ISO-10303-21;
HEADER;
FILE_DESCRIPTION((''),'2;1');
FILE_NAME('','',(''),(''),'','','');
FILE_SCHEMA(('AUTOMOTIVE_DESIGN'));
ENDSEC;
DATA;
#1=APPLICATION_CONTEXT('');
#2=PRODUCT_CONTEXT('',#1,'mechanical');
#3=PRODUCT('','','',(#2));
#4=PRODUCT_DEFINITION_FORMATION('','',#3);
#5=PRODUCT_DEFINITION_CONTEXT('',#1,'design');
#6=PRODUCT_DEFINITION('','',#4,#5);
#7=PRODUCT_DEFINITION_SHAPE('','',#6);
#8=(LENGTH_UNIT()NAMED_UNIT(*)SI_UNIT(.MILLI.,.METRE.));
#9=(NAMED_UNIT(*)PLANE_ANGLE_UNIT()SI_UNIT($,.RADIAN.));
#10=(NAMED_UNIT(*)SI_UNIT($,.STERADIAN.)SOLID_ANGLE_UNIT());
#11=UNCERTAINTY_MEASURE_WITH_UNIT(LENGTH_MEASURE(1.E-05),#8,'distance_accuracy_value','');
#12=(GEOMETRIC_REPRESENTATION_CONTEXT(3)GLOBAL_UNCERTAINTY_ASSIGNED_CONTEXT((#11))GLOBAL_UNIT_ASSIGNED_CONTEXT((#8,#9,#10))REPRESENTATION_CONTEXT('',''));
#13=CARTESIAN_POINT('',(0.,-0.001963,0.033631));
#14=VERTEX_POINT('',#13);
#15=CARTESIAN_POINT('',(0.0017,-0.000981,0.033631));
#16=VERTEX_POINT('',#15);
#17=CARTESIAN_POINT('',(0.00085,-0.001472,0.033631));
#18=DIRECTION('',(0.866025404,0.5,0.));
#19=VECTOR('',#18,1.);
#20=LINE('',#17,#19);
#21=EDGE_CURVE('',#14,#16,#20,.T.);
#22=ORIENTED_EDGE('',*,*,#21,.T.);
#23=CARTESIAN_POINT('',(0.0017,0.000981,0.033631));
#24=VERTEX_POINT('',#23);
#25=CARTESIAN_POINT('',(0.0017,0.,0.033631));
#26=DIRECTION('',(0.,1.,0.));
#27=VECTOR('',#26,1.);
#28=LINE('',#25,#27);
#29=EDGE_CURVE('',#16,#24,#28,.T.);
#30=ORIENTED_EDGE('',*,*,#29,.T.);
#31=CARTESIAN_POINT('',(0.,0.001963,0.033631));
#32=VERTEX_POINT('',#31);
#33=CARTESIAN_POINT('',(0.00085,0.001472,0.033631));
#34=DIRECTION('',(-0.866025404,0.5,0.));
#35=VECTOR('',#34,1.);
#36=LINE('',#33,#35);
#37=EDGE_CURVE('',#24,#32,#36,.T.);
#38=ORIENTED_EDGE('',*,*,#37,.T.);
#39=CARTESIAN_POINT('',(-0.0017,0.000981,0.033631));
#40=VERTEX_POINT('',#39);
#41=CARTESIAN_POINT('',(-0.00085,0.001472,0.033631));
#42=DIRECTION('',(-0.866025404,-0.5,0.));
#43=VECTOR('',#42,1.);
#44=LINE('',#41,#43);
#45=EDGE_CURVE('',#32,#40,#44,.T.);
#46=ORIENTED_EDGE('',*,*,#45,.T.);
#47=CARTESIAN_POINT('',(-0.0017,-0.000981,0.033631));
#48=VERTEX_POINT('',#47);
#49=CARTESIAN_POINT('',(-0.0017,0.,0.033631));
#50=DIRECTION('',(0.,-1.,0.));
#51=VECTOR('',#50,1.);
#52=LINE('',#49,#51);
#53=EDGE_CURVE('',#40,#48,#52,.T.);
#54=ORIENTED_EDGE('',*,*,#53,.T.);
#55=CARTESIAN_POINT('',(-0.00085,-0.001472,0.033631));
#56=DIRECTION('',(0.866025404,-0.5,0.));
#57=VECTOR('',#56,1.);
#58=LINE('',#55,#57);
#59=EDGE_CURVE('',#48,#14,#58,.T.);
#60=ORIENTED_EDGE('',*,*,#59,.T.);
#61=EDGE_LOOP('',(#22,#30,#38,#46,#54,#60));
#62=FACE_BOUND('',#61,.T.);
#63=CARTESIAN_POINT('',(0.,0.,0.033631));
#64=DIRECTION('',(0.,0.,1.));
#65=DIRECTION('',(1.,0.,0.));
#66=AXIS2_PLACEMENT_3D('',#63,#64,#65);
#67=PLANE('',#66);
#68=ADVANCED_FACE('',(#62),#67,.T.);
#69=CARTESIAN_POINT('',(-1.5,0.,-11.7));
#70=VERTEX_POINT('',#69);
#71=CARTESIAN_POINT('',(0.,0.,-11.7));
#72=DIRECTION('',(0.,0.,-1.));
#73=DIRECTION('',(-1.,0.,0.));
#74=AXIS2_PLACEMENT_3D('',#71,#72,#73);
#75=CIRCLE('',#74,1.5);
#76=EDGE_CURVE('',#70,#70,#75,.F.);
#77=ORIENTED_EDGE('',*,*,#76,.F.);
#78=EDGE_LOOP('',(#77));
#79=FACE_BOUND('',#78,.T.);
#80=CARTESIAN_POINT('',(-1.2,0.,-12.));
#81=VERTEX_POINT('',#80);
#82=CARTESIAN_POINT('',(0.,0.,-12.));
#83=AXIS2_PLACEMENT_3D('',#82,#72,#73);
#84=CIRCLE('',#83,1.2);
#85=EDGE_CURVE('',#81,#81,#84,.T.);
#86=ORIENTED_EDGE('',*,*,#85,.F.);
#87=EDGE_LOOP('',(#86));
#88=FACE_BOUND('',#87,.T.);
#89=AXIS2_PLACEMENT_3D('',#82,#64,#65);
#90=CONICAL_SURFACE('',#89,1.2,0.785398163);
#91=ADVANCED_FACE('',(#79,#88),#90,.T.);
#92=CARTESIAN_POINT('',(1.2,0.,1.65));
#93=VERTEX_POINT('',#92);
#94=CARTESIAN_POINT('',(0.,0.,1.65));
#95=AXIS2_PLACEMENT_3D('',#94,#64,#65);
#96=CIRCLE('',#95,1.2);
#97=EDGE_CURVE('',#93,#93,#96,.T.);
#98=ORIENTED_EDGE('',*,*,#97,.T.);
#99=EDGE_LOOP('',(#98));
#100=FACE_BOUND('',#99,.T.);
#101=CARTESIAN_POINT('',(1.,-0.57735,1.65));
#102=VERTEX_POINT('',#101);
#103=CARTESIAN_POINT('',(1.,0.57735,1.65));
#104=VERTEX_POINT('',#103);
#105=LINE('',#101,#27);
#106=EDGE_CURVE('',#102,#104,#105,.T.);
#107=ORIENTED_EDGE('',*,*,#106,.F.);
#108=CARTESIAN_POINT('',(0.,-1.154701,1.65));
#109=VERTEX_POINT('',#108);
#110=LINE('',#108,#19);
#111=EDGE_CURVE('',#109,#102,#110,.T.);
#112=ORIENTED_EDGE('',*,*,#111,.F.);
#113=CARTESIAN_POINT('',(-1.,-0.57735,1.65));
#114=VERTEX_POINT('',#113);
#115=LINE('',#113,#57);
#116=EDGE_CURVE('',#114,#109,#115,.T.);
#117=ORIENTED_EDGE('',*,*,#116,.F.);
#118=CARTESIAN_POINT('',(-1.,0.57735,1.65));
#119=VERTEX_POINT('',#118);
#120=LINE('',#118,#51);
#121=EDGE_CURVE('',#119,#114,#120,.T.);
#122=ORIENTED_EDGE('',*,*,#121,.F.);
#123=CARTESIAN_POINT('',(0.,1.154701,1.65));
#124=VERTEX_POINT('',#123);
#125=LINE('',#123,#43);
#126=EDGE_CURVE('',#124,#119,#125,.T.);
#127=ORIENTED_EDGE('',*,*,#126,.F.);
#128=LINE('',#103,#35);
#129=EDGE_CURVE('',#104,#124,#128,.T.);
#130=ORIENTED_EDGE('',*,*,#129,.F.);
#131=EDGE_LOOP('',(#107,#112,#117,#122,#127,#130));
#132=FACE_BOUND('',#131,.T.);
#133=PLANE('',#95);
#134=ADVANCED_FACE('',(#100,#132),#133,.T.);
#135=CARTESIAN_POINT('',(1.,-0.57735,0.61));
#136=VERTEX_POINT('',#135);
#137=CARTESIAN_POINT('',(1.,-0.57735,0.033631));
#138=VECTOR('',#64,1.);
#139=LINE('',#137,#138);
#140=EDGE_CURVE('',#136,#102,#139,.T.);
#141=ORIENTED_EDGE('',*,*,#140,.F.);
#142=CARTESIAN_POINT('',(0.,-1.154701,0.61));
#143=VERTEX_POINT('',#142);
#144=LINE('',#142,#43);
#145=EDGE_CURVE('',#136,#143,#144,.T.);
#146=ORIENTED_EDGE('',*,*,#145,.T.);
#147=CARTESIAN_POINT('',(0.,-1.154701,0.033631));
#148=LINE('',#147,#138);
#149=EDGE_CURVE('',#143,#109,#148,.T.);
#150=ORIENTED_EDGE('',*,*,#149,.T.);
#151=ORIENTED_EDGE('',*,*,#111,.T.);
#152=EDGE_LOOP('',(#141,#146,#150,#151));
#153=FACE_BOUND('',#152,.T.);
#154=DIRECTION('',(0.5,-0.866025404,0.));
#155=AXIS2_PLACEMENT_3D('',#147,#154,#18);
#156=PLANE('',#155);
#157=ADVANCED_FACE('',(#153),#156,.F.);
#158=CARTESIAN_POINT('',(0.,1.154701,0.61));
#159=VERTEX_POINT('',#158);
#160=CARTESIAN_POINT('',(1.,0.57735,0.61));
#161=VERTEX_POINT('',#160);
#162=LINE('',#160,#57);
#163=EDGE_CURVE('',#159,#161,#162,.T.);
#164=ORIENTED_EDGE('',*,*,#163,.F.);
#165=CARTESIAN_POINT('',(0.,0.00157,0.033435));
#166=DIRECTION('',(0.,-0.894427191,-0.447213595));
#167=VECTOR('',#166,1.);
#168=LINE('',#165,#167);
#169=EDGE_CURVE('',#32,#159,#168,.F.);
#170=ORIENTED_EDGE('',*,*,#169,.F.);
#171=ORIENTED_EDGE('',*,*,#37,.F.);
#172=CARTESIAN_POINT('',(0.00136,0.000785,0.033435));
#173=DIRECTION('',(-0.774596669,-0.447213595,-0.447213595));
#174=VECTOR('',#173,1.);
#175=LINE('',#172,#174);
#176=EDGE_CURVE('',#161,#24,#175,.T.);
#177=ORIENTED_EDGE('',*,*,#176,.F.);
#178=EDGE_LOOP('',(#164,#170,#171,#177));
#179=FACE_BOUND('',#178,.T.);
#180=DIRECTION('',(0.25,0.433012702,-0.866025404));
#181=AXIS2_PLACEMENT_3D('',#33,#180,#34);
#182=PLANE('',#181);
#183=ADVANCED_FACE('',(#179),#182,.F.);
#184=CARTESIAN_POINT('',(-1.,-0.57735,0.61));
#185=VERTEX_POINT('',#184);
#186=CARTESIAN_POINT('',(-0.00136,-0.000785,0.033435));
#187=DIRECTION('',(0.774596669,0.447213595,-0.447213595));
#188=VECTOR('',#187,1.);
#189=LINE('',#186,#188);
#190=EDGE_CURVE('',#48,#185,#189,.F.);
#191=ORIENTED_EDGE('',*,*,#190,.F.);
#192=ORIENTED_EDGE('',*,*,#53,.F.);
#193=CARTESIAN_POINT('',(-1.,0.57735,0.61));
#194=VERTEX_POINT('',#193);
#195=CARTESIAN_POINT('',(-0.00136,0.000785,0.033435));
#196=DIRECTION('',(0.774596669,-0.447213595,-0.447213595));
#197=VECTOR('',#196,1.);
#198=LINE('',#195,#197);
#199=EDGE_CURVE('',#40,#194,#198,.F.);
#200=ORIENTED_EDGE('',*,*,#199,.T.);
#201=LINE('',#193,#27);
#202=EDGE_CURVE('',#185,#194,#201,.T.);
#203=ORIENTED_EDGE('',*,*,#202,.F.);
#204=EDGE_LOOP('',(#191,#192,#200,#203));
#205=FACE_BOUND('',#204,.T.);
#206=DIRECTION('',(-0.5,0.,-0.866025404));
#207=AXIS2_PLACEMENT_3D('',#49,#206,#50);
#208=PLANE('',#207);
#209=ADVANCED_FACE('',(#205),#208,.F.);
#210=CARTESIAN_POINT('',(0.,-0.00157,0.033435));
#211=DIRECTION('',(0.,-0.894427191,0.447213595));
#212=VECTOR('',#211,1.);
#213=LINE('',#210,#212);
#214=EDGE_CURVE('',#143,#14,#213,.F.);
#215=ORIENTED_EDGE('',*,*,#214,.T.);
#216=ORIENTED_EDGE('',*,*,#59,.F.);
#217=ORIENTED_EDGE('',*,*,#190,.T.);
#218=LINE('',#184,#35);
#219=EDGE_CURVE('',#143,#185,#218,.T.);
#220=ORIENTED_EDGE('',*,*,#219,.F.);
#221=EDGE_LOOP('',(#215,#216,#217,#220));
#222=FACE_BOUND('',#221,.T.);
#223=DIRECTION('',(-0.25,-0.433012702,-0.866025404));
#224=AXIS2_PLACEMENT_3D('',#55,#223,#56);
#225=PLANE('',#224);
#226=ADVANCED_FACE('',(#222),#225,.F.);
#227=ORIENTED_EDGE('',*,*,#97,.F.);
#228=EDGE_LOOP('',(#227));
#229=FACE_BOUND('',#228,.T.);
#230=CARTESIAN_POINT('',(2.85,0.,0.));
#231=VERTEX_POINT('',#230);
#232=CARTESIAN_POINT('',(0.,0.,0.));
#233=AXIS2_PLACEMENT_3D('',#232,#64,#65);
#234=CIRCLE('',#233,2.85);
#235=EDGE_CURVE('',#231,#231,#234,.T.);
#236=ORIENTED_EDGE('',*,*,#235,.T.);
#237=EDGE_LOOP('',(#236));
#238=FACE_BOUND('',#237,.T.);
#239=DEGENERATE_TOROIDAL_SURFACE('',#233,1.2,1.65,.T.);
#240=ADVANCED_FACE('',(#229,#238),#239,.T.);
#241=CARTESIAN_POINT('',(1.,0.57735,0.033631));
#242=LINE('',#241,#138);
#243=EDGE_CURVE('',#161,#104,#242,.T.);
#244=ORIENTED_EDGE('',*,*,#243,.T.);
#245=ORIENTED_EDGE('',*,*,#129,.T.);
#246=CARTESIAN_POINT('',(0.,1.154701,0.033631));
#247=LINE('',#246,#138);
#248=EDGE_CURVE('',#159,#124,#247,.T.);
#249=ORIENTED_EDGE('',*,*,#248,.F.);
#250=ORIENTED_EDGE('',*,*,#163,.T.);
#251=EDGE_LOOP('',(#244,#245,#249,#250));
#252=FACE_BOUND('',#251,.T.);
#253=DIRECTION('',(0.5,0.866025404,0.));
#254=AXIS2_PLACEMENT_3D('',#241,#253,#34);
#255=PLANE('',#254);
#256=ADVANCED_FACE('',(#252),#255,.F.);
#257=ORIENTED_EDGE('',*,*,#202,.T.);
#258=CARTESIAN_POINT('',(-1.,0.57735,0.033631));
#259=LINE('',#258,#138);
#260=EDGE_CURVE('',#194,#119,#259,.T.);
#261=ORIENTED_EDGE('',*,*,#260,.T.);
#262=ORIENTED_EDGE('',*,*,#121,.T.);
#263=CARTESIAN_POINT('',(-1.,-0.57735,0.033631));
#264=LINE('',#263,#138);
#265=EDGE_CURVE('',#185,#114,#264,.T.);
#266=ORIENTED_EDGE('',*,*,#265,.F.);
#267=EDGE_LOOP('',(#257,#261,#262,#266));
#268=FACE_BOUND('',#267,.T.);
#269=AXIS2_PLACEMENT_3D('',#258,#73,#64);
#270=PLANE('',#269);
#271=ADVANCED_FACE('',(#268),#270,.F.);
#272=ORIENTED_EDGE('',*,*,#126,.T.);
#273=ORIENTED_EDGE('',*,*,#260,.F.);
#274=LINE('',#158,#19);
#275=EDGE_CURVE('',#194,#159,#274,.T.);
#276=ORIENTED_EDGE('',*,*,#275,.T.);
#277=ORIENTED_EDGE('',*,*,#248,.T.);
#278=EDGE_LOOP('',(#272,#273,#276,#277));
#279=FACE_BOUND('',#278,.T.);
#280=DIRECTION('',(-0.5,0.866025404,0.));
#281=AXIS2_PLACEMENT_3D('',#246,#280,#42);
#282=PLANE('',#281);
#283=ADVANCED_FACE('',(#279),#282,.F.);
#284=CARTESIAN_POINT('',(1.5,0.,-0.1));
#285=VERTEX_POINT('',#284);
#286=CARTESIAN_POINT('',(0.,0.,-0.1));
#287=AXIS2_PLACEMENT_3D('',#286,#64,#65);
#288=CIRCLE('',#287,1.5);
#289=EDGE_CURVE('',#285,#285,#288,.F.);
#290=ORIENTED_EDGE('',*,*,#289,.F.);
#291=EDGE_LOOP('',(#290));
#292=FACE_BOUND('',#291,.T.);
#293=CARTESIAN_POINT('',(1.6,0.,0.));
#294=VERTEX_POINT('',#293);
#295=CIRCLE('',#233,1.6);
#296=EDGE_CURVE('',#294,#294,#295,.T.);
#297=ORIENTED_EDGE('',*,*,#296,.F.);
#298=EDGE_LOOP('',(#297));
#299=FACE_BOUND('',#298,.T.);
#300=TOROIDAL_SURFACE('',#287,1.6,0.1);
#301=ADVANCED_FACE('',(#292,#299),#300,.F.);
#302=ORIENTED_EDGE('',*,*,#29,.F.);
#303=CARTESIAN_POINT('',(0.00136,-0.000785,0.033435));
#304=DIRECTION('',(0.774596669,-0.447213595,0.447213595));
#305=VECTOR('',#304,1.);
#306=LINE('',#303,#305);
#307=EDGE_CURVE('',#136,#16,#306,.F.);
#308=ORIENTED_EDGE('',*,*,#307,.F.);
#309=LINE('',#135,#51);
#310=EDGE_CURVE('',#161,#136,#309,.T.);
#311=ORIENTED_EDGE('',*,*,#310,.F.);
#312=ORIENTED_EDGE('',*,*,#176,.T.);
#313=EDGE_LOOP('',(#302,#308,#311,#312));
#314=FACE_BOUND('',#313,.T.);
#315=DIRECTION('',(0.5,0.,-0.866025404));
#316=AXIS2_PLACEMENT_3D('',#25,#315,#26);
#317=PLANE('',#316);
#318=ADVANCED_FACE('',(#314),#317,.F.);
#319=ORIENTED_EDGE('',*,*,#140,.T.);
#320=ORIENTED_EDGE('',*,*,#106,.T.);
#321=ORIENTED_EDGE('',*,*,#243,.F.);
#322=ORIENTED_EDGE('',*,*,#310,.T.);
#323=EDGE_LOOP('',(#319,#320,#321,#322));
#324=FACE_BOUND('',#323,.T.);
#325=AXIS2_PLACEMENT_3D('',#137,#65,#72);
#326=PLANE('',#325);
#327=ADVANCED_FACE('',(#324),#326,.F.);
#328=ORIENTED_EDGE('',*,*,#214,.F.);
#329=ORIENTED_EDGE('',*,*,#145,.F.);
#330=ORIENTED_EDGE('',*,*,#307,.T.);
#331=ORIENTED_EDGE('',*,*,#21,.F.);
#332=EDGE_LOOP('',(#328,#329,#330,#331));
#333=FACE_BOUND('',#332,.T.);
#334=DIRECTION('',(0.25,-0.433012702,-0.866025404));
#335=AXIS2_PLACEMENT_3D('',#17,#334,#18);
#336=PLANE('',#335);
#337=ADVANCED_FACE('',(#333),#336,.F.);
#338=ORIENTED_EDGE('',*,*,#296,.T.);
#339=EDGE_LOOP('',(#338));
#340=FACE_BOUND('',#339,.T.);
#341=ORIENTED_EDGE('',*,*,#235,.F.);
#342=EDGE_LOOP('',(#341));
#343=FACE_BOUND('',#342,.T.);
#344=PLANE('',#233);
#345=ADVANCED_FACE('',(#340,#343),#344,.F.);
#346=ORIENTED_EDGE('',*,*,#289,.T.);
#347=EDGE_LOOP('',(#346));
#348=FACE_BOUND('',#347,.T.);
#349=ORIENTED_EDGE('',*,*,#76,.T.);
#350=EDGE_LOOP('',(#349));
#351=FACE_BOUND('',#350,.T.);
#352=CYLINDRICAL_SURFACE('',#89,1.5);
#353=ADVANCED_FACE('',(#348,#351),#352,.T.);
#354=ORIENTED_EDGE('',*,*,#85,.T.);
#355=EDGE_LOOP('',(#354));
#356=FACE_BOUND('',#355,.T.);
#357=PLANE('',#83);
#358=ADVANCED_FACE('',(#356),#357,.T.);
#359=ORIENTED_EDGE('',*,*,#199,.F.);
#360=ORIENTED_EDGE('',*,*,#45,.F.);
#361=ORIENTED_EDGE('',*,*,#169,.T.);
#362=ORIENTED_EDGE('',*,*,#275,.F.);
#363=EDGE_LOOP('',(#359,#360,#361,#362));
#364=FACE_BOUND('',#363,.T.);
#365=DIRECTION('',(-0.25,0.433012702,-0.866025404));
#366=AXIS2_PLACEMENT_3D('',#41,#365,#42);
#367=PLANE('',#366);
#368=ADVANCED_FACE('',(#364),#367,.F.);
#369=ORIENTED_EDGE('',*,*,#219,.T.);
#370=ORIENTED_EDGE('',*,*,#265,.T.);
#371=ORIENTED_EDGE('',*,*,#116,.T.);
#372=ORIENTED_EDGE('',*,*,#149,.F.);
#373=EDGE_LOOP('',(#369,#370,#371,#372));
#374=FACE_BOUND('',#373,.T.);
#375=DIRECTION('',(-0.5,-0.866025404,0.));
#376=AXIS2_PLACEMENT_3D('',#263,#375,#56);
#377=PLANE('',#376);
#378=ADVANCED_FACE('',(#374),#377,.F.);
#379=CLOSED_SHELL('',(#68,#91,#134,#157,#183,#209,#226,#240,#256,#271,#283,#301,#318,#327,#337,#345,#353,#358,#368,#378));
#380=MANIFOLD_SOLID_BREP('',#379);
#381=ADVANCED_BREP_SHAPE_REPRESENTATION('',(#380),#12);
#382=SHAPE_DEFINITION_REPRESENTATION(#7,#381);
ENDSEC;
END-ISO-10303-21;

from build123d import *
from OCP.BRepFilletAPI import BRepFilletAPI_MakeChamfer

# Parameters (mm, degrees)
SKETCH_1_R          = 2.85
EXTRUDE_1_DEPTH     = 1.65
FILLET_1_R          = 1.65
SKETCH_3_R          = 1.5
EXTRUDE_3_DEPTH     = 12
CUT_EXTRUDE_1_DEPTH = 1.616368876
CHAMFER_2_SIZE      = 0.3
CHAMFER_3_SIZE      = 0.576368876
CHAMFER_3_SIZE2     = 0.998300177
FILLET_2_R          = 0.1


with BuildPart() as part:
    # 草图1 → 凸台-拉伸1 (new body)
    with BuildSketch(Plane.XY):
        Circle(SKETCH_1_R)
    extrude(amount=EXTRUDE_1_DEPTH)

    # 圆角1
    fillet_1_edges = [part.edges().sort_by_distance(p)[0] for p in [
        (-2.85, 0, 1.65),
    ]]
    fillet(fillet_1_edges, radius=FILLET_1_R - 0.0001)  # a hair under: the kernel refuses the full size

    # 草图3 → 凸台-拉伸3 (add)
    with BuildSketch(Plane(origin=(0, 0, 0), x_dir=(-1, 0, 0), z_dir=(0, 0, -1))):
        with Locations(Location((0, 0, 0), (0, 0, 180))):
            Circle(SKETCH_3_R)
    extrude(amount=EXTRUDE_3_DEPTH)

    # 草图4 → 切除-拉伸1 (cut)
    with BuildSketch(Plane.XY.offset(1.65)):
        Polygon((1, 0.577350269), (0, 1.154700538), (-1, 0.577350269), (-1, -0.577350269), (0, -1.154700538), (1, -0.577350269), align=None)
    extrude(amount=-CUT_EXTRUDE_1_DEPTH, mode=Mode.SUBTRACT)

    # 倒角2
    chamfer_2_edges = [part.edges().sort_by_distance(p)[0] for p in [
        (-1.5, 0, -12),
    ]]
    chamfer(chamfer_2_edges, length=CHAMFER_2_SIZE)

    # 倒角3: one chamfer whose edges measure the first distance from different faces: ONE call of the kernel's chamfer builder (chamfer() names one face for all edges)
    chamfer_3_edges_1 = [part.edges().sort_by_distance(p)[0] for p in [
        (1, 0, 0.033631124),
    ]]
    chamfer_3_side_1 = [part.faces().sort_by_distance(p)[0] for p in [
        (1, 0, 0.841815562),
    ]]
    chamfer_3_edges_2 = [part.edges().sort_by_distance(p)[0] for p in [
        (0.5, -0.866025404, 0.033631124),
    ]]
    chamfer_3_side_2 = [part.faces().sort_by_distance(p)[0] for p in [
        (0.5, -0.866025404, 0.841815562),
    ]]
    chamfer_3_edges_3 = [part.edges().sort_by_distance(p)[0] for p in [
        (-0.5, -0.866025404, 0.033631124),
    ]]
    chamfer_3_side_3 = [part.faces().sort_by_distance(p)[0] for p in [
        (-0.5, -0.866025404, 0.841815562),
    ]]
    chamfer_3_edges_4 = [part.edges().sort_by_distance(p)[0] for p in [
        (-1, 0, 0.033631124),
    ]]
    chamfer_3_side_4 = [part.faces().sort_by_distance(p)[0] for p in [
        (-1, 0, 0.841815562),
    ]]
    chamfer_3_edges_5 = [part.edges().sort_by_distance(p)[0] for p in [
        (-0.5, 0.866025404, 0.033631124),
    ]]
    chamfer_3_side_5 = [part.faces().sort_by_distance(p)[0] for p in [
        (-0.5, 0.866025404, 0.841815562),
    ]]
    chamfer_3_edges_6 = [part.edges().sort_by_distance(p)[0] for p in [
        (0.5, 0.866025404, 0.033631124),
    ]]
    chamfer_3_side_6 = [part.faces().sort_by_distance(p)[0] for p in [
        (0.5, 0.866025404, 0.841815562),
    ]]
    chamfer_3 = BRepFilletAPI_MakeChamfer(part.part.solid().wrapped)
    for e in chamfer_3_edges_1:
        chamfer_3.Add(CHAMFER_3_SIZE, CHAMFER_3_SIZE2, e.wrapped, chamfer_3_side_1[0].wrapped)  # the first distance lies on this face
    for e in chamfer_3_edges_2:
        chamfer_3.Add(CHAMFER_3_SIZE, CHAMFER_3_SIZE2, e.wrapped, chamfer_3_side_2[0].wrapped)  # the first distance lies on this face
    for e in chamfer_3_edges_3:
        chamfer_3.Add(CHAMFER_3_SIZE, CHAMFER_3_SIZE2, e.wrapped, chamfer_3_side_3[0].wrapped)  # the first distance lies on this face
    for e in chamfer_3_edges_4:
        chamfer_3.Add(CHAMFER_3_SIZE, CHAMFER_3_SIZE2, e.wrapped, chamfer_3_side_4[0].wrapped)  # the first distance lies on this face
    for e in chamfer_3_edges_5:
        chamfer_3.Add(CHAMFER_3_SIZE, CHAMFER_3_SIZE2, e.wrapped, chamfer_3_side_5[0].wrapped)  # the first distance lies on this face
    for e in chamfer_3_edges_6:
        chamfer_3.Add(CHAMFER_3_SIZE, CHAMFER_3_SIZE2, e.wrapped, chamfer_3_side_6[0].wrapped)  # the first distance lies on this face
    add(Compound.cast(chamfer_3.Shape()), mode=Mode.REPLACE)

    # 圆角2
    fillet_2_edges = [part.edges().sort_by_distance(p)[0] for p in [
        (-1.5, 0, 0),
    ]]
    fillet(fillet_2_edges, radius=FILLET_2_R)


solid = part.part
